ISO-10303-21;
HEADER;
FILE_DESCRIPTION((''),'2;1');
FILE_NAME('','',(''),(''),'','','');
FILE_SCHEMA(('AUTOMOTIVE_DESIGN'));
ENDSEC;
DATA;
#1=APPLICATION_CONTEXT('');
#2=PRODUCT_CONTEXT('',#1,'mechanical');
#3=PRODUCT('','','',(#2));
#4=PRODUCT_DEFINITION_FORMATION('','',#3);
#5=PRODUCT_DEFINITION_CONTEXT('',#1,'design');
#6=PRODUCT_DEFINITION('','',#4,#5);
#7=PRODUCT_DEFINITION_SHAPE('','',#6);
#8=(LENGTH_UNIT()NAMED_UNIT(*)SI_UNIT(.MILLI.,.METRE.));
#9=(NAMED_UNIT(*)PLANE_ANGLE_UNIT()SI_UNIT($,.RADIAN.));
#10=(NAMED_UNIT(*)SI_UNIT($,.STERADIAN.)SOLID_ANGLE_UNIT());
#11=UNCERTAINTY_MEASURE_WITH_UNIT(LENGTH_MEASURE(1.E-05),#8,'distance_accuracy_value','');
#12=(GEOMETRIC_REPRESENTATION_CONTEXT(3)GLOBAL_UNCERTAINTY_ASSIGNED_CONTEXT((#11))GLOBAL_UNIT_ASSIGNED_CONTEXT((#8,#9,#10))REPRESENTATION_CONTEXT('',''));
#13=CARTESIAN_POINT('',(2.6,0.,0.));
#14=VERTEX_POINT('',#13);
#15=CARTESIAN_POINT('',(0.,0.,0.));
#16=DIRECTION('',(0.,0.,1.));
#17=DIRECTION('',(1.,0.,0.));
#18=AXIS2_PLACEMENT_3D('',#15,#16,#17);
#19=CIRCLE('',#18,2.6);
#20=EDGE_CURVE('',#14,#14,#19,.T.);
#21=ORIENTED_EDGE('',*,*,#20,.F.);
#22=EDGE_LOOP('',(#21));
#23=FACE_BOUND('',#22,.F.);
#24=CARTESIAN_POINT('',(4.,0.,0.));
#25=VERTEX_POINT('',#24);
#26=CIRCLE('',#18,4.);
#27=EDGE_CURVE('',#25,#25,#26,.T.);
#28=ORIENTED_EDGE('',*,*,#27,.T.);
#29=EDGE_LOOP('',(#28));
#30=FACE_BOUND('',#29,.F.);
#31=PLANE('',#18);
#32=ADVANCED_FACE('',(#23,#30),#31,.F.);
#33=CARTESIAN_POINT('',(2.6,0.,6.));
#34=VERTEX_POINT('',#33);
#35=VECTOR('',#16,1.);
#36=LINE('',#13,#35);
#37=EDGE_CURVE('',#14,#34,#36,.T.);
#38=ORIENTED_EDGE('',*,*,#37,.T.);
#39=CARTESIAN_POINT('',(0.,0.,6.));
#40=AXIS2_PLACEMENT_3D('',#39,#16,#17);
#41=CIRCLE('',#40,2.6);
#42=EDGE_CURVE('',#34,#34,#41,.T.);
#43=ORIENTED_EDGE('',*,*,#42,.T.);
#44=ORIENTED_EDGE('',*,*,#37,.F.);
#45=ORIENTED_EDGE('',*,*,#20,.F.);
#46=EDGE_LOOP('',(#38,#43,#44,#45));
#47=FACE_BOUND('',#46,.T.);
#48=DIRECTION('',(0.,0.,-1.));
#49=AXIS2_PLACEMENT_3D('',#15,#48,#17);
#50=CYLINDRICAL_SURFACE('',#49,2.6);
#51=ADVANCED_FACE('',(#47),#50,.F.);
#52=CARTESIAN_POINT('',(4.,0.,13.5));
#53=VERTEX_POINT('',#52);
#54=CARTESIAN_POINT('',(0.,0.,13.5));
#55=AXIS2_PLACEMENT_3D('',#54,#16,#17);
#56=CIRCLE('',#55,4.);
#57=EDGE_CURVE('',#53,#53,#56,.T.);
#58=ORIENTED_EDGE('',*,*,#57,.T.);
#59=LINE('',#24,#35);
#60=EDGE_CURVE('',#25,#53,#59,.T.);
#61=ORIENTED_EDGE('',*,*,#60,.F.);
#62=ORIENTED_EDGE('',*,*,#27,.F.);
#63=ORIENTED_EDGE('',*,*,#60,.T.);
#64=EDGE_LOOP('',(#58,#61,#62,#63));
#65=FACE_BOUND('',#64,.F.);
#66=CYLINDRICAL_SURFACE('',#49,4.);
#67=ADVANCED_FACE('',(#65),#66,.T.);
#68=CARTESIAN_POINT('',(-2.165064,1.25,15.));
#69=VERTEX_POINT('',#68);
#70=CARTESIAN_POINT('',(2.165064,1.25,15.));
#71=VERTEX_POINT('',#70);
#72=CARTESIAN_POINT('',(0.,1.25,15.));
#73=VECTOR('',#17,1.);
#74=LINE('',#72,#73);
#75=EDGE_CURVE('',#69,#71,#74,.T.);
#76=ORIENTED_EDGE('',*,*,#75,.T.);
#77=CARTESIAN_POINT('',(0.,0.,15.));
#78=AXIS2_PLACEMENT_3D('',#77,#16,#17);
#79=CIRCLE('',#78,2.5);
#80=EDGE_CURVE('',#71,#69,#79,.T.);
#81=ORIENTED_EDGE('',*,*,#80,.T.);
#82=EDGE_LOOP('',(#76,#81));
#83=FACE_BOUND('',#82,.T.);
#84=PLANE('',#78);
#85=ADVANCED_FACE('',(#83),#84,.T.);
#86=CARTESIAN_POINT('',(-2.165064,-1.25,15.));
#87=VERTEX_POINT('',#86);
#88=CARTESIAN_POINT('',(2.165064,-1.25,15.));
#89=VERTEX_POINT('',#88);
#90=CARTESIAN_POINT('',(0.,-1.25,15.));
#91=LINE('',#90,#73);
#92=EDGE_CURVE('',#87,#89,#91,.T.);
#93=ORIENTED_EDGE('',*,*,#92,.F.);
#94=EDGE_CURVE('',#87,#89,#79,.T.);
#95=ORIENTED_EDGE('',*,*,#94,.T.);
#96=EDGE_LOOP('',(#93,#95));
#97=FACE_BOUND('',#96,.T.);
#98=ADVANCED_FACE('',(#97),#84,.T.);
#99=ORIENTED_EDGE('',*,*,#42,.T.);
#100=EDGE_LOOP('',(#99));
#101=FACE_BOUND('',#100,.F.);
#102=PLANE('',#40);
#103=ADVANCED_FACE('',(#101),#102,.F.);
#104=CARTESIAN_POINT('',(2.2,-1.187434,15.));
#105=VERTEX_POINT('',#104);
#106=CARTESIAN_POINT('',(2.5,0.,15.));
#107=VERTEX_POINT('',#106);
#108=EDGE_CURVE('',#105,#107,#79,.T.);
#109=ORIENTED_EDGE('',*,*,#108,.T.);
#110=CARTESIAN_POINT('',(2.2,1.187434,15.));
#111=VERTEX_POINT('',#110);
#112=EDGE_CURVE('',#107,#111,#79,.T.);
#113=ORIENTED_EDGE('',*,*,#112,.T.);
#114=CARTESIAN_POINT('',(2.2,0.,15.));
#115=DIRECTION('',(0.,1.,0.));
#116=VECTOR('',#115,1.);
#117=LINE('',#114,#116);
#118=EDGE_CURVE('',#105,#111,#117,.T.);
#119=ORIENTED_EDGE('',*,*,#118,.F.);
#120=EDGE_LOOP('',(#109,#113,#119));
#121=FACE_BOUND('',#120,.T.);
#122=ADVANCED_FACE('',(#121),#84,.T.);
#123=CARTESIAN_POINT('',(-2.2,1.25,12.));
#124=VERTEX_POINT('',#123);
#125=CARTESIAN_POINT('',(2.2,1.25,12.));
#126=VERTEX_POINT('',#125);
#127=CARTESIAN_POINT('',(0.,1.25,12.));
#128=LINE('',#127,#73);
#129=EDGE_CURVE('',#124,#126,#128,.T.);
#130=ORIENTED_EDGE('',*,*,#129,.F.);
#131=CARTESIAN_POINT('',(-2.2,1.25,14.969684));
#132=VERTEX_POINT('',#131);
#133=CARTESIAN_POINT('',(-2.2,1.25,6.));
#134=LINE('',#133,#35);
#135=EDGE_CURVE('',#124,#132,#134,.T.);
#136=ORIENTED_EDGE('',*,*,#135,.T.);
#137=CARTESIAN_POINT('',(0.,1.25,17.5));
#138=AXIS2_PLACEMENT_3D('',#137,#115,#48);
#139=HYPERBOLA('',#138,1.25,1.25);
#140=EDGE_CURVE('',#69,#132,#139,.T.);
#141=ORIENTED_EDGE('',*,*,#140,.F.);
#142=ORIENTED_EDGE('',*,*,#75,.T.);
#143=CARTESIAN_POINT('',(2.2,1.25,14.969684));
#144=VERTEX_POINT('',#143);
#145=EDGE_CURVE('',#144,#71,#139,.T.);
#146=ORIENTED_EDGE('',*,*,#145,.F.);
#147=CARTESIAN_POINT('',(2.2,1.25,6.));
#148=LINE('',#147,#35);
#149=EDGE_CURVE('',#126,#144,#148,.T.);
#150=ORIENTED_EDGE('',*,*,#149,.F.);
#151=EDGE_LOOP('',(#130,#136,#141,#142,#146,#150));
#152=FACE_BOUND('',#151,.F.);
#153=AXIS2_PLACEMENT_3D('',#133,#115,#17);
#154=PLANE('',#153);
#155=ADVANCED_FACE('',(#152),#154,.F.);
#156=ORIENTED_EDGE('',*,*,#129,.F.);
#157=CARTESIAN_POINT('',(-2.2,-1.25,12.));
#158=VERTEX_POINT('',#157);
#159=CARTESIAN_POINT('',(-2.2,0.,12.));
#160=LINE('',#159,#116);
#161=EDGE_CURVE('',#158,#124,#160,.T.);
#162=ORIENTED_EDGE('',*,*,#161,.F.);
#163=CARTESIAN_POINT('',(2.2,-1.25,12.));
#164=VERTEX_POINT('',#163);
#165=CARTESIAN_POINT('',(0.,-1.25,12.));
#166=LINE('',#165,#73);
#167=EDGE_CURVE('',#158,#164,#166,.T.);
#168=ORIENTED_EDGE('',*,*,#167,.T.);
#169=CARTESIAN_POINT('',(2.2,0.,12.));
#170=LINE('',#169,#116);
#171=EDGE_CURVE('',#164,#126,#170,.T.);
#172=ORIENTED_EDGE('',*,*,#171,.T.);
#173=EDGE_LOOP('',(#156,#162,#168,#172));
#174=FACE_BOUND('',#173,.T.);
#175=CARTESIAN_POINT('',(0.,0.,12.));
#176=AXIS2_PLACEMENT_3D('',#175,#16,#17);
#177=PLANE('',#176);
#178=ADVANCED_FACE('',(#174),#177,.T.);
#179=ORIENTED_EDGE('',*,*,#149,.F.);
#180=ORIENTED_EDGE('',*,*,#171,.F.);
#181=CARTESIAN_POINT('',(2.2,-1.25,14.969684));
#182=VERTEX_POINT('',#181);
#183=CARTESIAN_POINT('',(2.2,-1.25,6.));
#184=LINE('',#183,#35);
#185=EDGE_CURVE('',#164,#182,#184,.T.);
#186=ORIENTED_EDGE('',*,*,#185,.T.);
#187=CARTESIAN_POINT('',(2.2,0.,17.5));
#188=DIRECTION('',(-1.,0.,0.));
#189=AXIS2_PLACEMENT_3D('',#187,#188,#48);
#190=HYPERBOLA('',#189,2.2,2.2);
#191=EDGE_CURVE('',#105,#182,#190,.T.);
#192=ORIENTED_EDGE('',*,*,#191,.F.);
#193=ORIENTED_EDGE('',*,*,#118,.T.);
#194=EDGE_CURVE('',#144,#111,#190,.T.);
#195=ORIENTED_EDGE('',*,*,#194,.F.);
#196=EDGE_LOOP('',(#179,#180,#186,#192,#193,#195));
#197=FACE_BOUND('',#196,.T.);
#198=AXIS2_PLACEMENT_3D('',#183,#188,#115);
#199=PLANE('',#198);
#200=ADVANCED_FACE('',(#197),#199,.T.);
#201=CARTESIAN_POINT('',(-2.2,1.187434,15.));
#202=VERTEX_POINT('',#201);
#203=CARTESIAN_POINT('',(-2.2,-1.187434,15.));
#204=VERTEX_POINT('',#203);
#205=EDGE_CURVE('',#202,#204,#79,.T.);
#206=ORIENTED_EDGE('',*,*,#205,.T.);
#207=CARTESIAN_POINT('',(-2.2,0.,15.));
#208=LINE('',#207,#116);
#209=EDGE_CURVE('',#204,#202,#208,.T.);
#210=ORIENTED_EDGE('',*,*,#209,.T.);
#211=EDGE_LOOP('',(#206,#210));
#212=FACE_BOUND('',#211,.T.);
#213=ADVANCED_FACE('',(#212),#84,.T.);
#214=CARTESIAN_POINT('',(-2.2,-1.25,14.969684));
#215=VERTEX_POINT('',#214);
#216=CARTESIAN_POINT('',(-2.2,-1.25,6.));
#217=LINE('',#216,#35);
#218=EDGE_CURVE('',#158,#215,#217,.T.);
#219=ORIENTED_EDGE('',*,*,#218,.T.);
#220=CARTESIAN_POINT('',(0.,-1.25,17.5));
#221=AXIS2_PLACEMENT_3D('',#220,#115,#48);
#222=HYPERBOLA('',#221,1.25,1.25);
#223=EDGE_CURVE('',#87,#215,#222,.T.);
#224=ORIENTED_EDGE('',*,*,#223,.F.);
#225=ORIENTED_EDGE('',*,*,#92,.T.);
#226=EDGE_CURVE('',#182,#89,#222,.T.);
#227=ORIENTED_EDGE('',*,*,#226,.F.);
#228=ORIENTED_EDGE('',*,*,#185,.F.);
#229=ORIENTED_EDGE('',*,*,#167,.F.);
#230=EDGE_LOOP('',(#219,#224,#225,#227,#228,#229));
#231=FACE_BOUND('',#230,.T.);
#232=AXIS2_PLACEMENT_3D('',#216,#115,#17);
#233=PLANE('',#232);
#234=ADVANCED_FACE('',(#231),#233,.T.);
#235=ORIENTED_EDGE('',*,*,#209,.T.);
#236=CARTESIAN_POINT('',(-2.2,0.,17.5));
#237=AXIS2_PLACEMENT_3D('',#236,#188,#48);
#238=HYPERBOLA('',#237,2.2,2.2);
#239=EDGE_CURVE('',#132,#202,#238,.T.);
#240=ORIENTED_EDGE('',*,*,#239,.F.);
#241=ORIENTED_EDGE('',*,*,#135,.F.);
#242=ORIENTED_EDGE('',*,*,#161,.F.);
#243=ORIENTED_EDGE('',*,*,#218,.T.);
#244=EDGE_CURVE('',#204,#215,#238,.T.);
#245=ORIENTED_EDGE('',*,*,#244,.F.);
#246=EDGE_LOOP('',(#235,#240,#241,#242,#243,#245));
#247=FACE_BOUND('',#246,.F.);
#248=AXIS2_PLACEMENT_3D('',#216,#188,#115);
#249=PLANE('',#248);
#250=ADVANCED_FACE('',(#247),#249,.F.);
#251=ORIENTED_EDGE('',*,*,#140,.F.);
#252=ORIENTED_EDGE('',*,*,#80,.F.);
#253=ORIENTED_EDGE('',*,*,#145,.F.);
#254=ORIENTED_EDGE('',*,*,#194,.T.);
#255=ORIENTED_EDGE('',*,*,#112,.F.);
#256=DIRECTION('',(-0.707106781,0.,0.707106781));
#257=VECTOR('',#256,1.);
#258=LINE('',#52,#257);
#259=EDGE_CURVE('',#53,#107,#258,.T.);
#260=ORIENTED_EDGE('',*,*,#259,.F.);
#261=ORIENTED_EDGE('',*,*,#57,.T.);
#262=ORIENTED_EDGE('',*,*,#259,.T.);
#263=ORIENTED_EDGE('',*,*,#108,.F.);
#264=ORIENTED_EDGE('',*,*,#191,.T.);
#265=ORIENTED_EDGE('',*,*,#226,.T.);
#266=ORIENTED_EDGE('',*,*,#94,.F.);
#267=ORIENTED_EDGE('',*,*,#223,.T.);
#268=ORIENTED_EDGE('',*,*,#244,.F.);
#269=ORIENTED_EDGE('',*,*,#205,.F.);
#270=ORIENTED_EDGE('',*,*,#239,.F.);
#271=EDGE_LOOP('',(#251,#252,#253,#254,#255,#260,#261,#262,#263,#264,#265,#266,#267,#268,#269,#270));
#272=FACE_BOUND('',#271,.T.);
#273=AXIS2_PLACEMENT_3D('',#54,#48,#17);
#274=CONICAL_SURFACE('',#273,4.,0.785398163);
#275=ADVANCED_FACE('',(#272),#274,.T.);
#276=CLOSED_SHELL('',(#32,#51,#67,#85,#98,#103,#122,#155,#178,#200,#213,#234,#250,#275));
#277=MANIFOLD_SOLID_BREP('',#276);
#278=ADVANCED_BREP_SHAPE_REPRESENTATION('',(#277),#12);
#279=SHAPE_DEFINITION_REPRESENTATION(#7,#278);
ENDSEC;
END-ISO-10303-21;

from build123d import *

# Parameters (mm, degrees)
F0_R     = 4
F0_R_2   = 2.6
F1_DEPTH = 15
F2_START = 6
F0_W     = 4.4
F0_H     = 2.5
F2_DEPTH = 9
F3_START = 6
F3_DEPTH = 6


# Not quite as in the source:
# - a fillet or chamfer that OpenCascade refuses, or shapes differently, is made with other operations: its cross-section is extruded or revolved along the edge and cut away or added


with BuildPart() as f1:
    # F0 (on Top) → F1 (new body)
    with BuildSketch(Plane.XY):
        Circle(F0_R)
        Circle(F0_R_2, mode=Mode.SUBTRACT)
    extrude(amount=F1_DEPTH)

    # F0 (on Top) → F2 (join)
    with BuildSketch(Plane.XY.offset(F2_START)):
        Circle(F0_R_2)
        Rectangle(F0_W, F0_H, mode=Mode.SUBTRACT)
    extrude(amount=F2_DEPTH)

    # F0 (on Top) → F3 (join)
    with BuildSketch(Plane.XY.offset(F3_START)):
        Rectangle(F0_W, F0_H)
    extrude(amount=F3_DEPTH)

    # F4: chamfer of 1.5 on 1 edges, made by hand

    # F4_s1 → F4_t2 (revolve, cut)
    with BuildSketch(Plane.XZ):
        Polygon((4, 13.5), (2.5, 15), (4, 15), align=None)
    revolve(axis=Axis((0, 0, 15), (0, 0, 1)), mode=Mode.SUBTRACT)


solid = f1.part
